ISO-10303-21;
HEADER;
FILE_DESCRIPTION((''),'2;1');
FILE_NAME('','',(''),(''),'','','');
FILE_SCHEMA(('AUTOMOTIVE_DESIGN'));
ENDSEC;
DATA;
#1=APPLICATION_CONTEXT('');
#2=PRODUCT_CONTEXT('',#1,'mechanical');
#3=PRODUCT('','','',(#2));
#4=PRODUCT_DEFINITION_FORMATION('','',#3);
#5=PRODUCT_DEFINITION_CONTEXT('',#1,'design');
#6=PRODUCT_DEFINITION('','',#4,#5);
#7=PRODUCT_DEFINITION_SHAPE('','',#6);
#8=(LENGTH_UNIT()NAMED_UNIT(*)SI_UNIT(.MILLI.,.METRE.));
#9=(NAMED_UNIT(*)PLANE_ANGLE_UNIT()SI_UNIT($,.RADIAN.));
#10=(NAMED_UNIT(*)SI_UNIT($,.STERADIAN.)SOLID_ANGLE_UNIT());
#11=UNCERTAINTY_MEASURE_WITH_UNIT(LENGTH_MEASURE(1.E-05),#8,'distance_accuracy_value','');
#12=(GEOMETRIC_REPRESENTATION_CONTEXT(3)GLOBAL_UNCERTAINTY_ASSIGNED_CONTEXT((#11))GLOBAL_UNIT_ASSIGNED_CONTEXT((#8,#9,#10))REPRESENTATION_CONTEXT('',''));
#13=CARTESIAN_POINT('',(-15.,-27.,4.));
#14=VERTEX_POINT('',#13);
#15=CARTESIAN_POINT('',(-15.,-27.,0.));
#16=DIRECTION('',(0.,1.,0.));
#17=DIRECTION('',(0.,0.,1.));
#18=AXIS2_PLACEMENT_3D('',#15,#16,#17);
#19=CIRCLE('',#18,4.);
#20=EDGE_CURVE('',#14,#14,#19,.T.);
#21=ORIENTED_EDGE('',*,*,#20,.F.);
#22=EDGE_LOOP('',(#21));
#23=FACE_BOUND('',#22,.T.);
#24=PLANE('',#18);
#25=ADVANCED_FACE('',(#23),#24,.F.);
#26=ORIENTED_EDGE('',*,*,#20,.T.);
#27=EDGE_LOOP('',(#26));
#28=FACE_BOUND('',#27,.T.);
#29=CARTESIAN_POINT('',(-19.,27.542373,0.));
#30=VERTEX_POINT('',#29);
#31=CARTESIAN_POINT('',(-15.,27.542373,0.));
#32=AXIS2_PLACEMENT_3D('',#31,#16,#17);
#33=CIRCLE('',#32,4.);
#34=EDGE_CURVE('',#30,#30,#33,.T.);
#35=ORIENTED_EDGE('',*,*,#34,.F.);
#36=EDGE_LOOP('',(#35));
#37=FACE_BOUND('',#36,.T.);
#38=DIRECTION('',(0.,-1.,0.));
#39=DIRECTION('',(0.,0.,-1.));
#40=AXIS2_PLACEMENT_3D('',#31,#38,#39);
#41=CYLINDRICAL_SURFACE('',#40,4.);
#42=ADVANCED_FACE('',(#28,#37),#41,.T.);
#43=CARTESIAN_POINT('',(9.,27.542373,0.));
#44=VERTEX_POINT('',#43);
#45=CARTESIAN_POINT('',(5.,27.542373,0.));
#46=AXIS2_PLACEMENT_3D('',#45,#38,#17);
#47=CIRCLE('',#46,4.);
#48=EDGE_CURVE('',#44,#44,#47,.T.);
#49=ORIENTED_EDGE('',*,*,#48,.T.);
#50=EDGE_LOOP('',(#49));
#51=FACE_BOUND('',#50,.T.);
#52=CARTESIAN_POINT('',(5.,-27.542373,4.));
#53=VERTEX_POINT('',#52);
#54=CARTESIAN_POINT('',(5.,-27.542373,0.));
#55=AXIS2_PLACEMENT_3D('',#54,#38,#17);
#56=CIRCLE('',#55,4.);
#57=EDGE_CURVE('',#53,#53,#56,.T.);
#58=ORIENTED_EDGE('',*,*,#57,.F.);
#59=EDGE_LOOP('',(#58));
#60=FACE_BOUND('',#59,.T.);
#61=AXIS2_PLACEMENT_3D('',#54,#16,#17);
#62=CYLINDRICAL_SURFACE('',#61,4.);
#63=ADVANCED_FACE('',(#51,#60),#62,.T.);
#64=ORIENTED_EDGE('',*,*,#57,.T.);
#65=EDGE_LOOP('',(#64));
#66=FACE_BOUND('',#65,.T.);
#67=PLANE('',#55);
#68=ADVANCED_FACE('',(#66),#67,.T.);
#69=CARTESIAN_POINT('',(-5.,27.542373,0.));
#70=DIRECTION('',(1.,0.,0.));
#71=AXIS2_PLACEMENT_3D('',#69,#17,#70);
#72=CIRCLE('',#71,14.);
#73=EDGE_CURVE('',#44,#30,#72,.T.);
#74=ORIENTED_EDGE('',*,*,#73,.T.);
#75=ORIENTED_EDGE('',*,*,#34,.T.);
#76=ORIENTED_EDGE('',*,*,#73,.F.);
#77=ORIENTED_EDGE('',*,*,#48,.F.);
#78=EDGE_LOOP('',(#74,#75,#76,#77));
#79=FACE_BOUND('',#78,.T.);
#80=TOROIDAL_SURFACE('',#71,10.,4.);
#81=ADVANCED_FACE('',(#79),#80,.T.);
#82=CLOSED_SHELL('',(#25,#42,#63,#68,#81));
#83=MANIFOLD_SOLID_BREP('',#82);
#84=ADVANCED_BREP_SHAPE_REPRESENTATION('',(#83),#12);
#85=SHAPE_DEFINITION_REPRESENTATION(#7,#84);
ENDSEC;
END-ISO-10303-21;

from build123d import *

# Parameters (mm, degrees)
SWEEP1_START        = -27.542372881
SWEEP1_OUTLINE_R    = 4
SWEEP1_DEPTH        = 55.084745762
SWEEP1_2_OUTLINE_R  = 4
SWEEP1_2_DEPTH      = 27.542372881
SWEEP1_3_OUTLINE_R  = 4
SWEEP1_3_ANGLE      = 180
BOSS_EXTRUDE1_START = -27
SKETCH2_2_R         = 4
BOSS_EXTRUDE1_DEPTH = 27


with BuildPart() as part:
    # Sweep1: read off the stored shape, not the designer's step
    # Sweep1 outline → Sweep1 (new body)
    with BuildSketch(Plane(origin=(0, 0, 0), x_dir=(1, 0, 0), z_dir=(0, 1, 0)).offset(SWEEP1_START)):
        with Locations((5, 0)):
            Circle(SWEEP1_OUTLINE_R)
    extrude(amount=SWEEP1_DEPTH)



with BuildPart() as body_2:
    # Sweep1 2 outline → Sweep1 2 (new body)
    with BuildSketch(Plane(origin=(0, 0, 0), x_dir=(1, 0, 0), z_dir=(0, 1, 0))):
        with Locations((-15, 0)):
            Circle(SWEEP1_2_OUTLINE_R)
    extrude(amount=SWEEP1_2_DEPTH)


with BuildPart() as part_1:
    add(part.part)

    add(body_2.part)  # Sweep1 3 merges body 2
    # Sweep1 3 outline → Sweep1 3 (revolve)
    with BuildSketch(Plane(origin=(-5, 27.542372881, 0), x_dir=(1, 0, 0), z_dir=(0, -1, 0))):
        with Locations((10, 0)):
            Circle(SWEEP1_3_OUTLINE_R)
    revolve(axis=Axis((-5, 27.542372881, 0), (0, 0, 1)), revolution_arc=SWEEP1_3_ANGLE)

    # Sketch2<2> → Boss-Extrude1 (add)
    with BuildSketch(Plane(origin=(0, 0, 0), x_dir=(1, 0, 0), z_dir=(0, 1, 0)).offset(BOSS_EXTRUDE1_START)):
        with Locations(Location((-15, 0, 0), (0, 0, 180))):
            Circle(SKETCH2_2_R)
    extrude(amount=BOSS_EXTRUDE1_DEPTH)


solid = part_1.part
